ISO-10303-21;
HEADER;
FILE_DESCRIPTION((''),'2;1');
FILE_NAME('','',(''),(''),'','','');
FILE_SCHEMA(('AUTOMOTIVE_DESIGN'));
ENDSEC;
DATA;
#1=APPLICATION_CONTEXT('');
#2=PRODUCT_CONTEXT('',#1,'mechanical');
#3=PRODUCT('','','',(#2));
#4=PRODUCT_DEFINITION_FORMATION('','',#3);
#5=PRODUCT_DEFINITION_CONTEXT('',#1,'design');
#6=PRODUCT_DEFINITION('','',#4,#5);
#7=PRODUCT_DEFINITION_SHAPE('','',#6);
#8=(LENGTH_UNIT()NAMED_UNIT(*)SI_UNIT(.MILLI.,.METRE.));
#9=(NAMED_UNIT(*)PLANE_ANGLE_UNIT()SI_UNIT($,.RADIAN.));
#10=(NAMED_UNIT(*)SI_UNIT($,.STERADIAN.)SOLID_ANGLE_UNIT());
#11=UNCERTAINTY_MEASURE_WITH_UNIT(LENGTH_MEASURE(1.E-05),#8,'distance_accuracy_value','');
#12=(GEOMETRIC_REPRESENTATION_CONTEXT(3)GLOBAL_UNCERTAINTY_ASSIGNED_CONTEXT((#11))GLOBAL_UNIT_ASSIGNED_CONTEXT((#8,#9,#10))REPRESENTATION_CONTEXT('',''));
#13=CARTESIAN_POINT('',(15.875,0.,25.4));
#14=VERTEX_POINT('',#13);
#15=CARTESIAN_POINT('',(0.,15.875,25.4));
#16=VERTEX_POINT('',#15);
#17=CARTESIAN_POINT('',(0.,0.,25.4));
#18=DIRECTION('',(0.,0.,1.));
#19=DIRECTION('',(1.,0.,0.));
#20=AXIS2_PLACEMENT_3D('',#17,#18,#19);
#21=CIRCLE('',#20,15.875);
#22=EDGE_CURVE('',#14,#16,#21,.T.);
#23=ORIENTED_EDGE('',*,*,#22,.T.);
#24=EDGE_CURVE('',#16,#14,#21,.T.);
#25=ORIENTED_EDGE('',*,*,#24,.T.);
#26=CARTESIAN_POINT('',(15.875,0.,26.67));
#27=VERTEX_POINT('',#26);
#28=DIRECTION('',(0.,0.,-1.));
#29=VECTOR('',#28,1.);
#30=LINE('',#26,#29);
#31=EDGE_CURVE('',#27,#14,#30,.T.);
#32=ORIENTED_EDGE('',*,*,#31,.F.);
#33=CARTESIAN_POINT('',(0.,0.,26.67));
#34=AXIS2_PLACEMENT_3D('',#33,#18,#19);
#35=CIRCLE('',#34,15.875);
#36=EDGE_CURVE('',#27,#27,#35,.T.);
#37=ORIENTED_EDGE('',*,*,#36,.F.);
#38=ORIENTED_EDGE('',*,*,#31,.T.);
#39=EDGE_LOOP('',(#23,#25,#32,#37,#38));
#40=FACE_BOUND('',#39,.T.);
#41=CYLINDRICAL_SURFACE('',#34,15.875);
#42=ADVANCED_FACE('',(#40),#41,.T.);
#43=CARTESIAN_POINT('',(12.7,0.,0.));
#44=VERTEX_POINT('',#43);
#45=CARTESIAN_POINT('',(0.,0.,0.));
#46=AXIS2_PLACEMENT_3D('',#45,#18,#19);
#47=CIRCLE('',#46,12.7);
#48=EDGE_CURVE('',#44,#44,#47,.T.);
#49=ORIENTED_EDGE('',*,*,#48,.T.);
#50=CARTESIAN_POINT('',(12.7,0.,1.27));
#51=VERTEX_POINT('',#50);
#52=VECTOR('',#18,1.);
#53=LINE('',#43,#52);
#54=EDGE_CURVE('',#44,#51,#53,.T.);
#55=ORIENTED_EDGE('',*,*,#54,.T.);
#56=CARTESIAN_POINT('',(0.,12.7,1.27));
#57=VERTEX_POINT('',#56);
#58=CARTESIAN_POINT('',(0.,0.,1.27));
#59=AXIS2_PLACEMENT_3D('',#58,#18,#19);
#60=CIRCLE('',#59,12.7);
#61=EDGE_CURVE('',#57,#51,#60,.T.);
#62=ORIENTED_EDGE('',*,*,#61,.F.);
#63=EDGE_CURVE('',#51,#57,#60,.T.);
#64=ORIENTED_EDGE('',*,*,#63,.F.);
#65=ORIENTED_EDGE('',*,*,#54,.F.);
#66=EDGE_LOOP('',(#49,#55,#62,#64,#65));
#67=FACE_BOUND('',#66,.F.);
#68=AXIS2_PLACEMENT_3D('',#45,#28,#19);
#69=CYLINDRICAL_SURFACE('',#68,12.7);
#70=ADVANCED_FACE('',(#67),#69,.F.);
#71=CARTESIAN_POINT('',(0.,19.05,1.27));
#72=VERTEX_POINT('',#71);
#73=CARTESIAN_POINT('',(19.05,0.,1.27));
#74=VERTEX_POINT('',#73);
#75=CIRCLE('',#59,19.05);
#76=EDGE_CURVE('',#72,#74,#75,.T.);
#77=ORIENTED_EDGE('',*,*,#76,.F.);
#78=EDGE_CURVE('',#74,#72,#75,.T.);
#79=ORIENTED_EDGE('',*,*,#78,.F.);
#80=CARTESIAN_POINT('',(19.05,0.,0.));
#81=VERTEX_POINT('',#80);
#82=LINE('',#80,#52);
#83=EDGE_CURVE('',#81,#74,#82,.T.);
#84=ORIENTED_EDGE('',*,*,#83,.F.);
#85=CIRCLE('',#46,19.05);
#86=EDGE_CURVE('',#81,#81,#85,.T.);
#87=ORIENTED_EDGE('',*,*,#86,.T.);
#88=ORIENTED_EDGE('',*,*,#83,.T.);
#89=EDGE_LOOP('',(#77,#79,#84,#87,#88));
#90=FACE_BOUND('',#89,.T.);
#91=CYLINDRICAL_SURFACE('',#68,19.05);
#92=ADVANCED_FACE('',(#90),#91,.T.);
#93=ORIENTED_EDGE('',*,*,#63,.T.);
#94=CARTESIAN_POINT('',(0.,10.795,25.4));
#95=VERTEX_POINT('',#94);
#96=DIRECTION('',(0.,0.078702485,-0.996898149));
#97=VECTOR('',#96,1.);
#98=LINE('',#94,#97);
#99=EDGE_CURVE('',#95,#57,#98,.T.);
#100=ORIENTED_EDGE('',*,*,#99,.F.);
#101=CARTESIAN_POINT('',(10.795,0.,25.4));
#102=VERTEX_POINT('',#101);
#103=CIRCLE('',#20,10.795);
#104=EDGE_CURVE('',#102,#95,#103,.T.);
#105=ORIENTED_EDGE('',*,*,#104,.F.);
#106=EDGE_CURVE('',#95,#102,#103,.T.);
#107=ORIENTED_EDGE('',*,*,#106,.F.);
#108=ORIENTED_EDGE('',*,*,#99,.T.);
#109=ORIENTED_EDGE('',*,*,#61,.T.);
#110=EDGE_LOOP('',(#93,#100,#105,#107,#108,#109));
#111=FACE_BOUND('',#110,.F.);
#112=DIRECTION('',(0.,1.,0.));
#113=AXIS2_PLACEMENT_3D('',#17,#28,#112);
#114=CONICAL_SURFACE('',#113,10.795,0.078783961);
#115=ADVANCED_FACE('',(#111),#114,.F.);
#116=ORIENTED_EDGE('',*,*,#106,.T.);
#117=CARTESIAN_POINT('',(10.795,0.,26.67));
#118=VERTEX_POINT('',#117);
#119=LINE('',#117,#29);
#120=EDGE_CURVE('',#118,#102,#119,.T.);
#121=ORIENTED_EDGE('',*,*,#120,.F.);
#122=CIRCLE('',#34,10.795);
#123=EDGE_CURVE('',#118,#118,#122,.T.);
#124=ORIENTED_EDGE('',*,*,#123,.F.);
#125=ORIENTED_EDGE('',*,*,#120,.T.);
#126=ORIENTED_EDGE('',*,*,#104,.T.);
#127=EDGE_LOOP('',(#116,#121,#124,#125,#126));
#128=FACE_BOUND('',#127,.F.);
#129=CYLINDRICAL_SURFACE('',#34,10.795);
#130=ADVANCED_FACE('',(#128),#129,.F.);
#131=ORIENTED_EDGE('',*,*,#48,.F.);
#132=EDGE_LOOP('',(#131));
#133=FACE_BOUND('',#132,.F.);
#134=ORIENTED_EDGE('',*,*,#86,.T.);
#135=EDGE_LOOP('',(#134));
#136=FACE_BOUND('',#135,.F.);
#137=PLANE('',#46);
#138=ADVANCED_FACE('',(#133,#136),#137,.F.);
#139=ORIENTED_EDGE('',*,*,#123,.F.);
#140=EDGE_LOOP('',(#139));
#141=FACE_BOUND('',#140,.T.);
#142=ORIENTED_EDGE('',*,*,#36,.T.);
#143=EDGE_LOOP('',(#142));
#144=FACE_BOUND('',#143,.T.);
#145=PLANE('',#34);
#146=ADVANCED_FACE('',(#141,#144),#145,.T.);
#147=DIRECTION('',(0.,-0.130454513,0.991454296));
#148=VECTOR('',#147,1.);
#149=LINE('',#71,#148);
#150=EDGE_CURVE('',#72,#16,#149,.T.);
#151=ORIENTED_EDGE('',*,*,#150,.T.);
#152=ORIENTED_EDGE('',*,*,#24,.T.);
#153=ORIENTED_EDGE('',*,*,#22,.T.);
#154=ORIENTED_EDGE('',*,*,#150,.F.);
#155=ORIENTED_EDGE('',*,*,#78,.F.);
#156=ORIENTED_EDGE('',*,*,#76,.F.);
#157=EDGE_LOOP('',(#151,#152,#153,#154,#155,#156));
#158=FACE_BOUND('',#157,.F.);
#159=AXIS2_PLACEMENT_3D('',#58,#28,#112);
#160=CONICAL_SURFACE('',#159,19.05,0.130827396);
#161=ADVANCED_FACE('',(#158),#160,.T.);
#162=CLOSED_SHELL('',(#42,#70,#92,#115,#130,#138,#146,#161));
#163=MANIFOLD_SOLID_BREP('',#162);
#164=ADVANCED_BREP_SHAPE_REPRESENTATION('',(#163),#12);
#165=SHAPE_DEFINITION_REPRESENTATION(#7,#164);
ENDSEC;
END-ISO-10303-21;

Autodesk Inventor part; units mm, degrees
ref_plane "YZ Plane" through (0, 0, 0) normal (1, 0, 0) x (0, 1, 0)
sketch "Sketch2" plane through (0, 0, 0) normal (0, 0, 1) x (1, 0, 0)
  circle A0 centre (0, 0) radius 19.05
  circle A1 centre (0, 0) radius 12.7
  dimension "d0" = 38.1
  dimension "d1" = 25.4
ref_plane "Work Plane1" through (0, 0, 26.67) normal (0, 0, 1) x (1, 0, 0)
sketch "Sketch3" plane through (0, 0, 26.67) normal (0, 0, 1) x (1, 0, 0)
  circle A0 centre (0, 0) radius 15.875
  circle A1 centre (0, 0) radius 10.795
  dimension "d5" = 31.75
  dimension "d6" = 21.59
extrude "Extrusion2" add sketch "Sketch3" against normal blind 1.27
extrude "Extrusion3" add sketch "Sketch2" along normal blind 1.27
sketch "Sketch4" plane through (0, 0, 26.67) normal (0, 0, 1) x (1, 0, 0)
  circle A0 centre (0, 0) radius 19.05 projected
  line L0 (0, 19.05) -> (0, 0) construction
ref_plane "Work Plane2" through (0, 19.05, 26.67) normal (1, 0, 0) x (0, -1, 0)
sketch "Sketch5" plane through (0, 19.05, 26.67) normal (1, 0, 0) x (0, -1, 0)
  line L0 (34.925, 1.27) -> (3.175, 1.27)
  line L1 (0, 25.4) -> (38.1, 25.4)
  line L2 (3.175, 1.27) -> (0, 25.4)
  line L3 (8.255, 1.27) -> (29.845, 1.27)
  line L4 (31.75, 25.4) -> (6.35, 25.4)
  line L5 (6.35, 1.27) -> (6.35, 25.4)
  line L6 (6.35, 25.4) -> (0, 25.4)
  line L7 (8.255, 1.27) -> (3.175, 1.27)
  line L8 (19.05, -0.091501) -> (19.05, 9.410296) construction
  point P0 (19.05, 26.67)
sketch "Sketch5 outline for Revolution1" plane through (0, 19.05, 26.67) normal (1, 0, 0) x (0, -1, 0)
  line L0 (0, 25.4) -> (3.175, 1.27)
  line L1 (6.35, 25.4) -> (0, 25.4)
  line L2 (8.255, 1.27) -> (6.35, 25.4)
  line L3 (3.175, 1.27) -> (8.255, 1.27)
revolve "Revolution1" add sketch "Sketch5 outline for Revolution1" angle 360 about axis through (0, 0, 26.761501) along (0, 0, -1)
properties part number "ecomake end part"
